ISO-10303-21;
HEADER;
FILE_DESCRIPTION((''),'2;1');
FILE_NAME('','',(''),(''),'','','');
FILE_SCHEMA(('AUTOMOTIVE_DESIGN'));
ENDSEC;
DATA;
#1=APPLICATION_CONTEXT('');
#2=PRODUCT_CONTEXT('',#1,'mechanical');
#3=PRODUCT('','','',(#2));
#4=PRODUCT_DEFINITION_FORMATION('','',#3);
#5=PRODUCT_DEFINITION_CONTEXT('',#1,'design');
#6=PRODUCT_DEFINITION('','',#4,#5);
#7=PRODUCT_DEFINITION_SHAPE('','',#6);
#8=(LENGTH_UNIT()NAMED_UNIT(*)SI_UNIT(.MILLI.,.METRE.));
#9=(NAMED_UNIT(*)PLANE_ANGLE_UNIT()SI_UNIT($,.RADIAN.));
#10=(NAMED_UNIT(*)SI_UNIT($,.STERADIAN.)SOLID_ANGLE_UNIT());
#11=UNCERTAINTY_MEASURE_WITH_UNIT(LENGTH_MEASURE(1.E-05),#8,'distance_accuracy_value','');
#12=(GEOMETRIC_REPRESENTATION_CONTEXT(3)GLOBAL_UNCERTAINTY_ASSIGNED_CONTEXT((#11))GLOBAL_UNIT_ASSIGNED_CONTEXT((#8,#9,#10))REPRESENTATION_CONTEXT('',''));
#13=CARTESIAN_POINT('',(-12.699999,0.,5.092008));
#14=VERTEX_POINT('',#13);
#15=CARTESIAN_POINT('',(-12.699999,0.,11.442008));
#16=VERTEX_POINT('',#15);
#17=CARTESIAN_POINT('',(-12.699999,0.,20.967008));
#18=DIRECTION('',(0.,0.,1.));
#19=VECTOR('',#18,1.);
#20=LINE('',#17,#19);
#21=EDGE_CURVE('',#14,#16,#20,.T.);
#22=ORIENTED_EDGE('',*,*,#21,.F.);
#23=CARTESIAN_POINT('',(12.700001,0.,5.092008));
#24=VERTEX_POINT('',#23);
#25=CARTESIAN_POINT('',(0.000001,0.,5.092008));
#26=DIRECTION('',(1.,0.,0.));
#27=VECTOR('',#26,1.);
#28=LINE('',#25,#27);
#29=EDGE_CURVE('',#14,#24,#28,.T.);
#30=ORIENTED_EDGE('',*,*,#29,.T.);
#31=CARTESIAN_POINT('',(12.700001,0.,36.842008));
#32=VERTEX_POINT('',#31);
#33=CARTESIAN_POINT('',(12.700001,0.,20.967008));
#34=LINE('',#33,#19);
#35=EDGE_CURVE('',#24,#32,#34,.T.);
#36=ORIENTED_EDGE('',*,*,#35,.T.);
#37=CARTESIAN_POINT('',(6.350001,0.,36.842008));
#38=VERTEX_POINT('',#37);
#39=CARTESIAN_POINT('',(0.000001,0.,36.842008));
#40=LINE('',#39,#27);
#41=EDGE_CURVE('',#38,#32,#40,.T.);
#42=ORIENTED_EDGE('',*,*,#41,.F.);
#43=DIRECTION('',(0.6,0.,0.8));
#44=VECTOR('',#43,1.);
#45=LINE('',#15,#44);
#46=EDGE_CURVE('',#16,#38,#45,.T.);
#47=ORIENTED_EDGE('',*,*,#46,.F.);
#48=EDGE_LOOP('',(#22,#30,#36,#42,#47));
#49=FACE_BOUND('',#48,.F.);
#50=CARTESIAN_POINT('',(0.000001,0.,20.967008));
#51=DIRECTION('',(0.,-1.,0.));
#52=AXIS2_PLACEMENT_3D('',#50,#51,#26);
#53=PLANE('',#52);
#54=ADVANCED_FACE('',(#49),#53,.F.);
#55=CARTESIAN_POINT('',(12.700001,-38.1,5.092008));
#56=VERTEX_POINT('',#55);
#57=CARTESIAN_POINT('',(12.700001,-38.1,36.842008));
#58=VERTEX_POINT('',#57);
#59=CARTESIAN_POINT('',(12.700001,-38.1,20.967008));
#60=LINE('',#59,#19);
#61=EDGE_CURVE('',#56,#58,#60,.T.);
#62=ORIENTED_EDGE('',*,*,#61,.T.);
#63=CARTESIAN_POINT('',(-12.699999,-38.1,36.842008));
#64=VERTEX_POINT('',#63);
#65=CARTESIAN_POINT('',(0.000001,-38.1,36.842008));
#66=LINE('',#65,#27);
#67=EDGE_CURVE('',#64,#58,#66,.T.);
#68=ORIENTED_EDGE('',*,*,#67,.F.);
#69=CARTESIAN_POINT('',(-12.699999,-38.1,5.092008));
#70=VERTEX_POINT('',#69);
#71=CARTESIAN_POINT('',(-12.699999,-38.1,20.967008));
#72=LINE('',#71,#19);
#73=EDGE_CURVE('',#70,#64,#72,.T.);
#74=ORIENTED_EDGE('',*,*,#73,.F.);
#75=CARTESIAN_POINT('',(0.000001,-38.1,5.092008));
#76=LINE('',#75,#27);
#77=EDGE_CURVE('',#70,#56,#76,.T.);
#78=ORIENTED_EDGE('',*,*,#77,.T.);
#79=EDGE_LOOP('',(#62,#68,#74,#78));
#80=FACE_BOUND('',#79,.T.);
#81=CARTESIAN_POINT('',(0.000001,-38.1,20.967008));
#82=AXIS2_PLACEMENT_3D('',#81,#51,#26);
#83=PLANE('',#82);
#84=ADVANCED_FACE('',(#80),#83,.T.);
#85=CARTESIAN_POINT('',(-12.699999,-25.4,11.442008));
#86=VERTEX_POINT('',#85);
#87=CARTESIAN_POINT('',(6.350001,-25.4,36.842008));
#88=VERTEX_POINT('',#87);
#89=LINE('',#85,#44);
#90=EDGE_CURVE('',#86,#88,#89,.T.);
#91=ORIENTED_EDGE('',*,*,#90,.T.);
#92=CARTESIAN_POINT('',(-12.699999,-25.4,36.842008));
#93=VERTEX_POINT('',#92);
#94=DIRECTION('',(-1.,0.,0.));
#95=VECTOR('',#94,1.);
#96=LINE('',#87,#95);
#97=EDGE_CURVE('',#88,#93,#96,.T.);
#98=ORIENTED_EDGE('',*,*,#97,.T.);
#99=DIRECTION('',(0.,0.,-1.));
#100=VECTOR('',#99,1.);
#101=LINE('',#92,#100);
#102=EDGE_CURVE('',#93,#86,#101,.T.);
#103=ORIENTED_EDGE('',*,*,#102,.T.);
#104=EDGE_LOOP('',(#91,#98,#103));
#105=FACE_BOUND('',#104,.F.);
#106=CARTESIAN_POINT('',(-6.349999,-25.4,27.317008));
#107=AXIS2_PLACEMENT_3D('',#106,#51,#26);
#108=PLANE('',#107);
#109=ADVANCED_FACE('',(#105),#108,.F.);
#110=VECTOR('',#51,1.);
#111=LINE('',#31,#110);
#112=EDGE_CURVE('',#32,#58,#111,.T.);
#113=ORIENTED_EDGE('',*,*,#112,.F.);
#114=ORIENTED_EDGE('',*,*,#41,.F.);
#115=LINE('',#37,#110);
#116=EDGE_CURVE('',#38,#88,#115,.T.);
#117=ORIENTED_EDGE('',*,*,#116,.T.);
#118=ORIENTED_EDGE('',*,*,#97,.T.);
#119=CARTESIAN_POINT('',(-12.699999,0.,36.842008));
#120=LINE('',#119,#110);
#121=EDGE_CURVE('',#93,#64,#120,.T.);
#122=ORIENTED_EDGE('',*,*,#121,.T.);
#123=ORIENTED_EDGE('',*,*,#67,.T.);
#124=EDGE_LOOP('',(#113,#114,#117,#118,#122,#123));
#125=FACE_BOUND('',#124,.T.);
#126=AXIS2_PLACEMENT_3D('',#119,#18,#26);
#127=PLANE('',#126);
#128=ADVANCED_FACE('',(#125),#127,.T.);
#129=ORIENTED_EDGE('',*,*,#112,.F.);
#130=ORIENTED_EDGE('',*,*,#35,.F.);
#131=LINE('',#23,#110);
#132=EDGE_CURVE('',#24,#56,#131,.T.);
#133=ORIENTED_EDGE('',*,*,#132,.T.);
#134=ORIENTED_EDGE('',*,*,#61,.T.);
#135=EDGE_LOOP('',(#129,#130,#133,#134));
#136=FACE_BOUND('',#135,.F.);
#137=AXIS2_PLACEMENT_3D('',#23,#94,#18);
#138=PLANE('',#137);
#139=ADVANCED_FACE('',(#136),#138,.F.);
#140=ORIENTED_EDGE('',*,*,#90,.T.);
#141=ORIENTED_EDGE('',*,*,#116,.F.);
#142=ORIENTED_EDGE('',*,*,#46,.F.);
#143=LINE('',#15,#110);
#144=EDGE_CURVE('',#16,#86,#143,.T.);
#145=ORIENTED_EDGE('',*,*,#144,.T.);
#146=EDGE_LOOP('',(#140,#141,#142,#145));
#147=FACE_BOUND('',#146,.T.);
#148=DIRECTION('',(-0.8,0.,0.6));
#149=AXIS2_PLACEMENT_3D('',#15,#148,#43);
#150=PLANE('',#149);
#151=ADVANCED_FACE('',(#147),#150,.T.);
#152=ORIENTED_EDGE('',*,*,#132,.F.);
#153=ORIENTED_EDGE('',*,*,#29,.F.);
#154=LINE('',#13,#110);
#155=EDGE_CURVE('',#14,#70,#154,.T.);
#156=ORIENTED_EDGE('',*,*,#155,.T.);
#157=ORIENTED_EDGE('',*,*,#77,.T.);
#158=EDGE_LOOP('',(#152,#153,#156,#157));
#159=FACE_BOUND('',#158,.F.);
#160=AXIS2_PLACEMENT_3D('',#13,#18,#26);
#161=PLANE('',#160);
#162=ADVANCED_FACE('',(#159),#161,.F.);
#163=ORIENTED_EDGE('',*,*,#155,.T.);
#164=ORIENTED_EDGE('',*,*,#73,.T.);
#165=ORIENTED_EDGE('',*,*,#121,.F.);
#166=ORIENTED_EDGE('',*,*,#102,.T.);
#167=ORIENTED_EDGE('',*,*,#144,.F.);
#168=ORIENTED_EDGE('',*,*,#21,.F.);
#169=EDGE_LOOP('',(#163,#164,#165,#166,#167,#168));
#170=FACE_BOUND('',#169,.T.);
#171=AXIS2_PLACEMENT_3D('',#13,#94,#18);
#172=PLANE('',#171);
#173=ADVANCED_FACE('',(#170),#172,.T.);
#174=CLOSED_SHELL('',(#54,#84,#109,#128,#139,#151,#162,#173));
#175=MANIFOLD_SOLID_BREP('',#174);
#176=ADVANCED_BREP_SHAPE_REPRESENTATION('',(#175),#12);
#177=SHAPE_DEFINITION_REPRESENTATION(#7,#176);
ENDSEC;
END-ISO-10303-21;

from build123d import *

# Parameters (mm, degrees)
F0_W     = 25.4
F0_H     = 31.75
F1_DEPTH = 38.1
F3_DEPTH = 25.4


# Not quite as in the source:
# - a length typed as a fraction of an inch, garbled in the dataset ("3 / 203.2 mm" for 3/8 in), is restored


with BuildPart() as f1:
    # F0 (on Front) → F1 (new body)
    with BuildSketch(Plane.XZ):
        with Locations((9.313e-07, 20.9670082225)):
            Rectangle(F0_W, F0_H)
    extrude(amount=F1_DEPTH)

    # F2 (on Front) → F3 (cut)
    with BuildSketch(Plane.XZ):
        Polygon((-12.6999990687, 11.4420082225), (6.3500009313, 36.8420082225), (-12.6999990687, 36.8420082225), align=None)
    extrude(amount=F3_DEPTH, mode=Mode.SUBTRACT)


solid = f1.part
